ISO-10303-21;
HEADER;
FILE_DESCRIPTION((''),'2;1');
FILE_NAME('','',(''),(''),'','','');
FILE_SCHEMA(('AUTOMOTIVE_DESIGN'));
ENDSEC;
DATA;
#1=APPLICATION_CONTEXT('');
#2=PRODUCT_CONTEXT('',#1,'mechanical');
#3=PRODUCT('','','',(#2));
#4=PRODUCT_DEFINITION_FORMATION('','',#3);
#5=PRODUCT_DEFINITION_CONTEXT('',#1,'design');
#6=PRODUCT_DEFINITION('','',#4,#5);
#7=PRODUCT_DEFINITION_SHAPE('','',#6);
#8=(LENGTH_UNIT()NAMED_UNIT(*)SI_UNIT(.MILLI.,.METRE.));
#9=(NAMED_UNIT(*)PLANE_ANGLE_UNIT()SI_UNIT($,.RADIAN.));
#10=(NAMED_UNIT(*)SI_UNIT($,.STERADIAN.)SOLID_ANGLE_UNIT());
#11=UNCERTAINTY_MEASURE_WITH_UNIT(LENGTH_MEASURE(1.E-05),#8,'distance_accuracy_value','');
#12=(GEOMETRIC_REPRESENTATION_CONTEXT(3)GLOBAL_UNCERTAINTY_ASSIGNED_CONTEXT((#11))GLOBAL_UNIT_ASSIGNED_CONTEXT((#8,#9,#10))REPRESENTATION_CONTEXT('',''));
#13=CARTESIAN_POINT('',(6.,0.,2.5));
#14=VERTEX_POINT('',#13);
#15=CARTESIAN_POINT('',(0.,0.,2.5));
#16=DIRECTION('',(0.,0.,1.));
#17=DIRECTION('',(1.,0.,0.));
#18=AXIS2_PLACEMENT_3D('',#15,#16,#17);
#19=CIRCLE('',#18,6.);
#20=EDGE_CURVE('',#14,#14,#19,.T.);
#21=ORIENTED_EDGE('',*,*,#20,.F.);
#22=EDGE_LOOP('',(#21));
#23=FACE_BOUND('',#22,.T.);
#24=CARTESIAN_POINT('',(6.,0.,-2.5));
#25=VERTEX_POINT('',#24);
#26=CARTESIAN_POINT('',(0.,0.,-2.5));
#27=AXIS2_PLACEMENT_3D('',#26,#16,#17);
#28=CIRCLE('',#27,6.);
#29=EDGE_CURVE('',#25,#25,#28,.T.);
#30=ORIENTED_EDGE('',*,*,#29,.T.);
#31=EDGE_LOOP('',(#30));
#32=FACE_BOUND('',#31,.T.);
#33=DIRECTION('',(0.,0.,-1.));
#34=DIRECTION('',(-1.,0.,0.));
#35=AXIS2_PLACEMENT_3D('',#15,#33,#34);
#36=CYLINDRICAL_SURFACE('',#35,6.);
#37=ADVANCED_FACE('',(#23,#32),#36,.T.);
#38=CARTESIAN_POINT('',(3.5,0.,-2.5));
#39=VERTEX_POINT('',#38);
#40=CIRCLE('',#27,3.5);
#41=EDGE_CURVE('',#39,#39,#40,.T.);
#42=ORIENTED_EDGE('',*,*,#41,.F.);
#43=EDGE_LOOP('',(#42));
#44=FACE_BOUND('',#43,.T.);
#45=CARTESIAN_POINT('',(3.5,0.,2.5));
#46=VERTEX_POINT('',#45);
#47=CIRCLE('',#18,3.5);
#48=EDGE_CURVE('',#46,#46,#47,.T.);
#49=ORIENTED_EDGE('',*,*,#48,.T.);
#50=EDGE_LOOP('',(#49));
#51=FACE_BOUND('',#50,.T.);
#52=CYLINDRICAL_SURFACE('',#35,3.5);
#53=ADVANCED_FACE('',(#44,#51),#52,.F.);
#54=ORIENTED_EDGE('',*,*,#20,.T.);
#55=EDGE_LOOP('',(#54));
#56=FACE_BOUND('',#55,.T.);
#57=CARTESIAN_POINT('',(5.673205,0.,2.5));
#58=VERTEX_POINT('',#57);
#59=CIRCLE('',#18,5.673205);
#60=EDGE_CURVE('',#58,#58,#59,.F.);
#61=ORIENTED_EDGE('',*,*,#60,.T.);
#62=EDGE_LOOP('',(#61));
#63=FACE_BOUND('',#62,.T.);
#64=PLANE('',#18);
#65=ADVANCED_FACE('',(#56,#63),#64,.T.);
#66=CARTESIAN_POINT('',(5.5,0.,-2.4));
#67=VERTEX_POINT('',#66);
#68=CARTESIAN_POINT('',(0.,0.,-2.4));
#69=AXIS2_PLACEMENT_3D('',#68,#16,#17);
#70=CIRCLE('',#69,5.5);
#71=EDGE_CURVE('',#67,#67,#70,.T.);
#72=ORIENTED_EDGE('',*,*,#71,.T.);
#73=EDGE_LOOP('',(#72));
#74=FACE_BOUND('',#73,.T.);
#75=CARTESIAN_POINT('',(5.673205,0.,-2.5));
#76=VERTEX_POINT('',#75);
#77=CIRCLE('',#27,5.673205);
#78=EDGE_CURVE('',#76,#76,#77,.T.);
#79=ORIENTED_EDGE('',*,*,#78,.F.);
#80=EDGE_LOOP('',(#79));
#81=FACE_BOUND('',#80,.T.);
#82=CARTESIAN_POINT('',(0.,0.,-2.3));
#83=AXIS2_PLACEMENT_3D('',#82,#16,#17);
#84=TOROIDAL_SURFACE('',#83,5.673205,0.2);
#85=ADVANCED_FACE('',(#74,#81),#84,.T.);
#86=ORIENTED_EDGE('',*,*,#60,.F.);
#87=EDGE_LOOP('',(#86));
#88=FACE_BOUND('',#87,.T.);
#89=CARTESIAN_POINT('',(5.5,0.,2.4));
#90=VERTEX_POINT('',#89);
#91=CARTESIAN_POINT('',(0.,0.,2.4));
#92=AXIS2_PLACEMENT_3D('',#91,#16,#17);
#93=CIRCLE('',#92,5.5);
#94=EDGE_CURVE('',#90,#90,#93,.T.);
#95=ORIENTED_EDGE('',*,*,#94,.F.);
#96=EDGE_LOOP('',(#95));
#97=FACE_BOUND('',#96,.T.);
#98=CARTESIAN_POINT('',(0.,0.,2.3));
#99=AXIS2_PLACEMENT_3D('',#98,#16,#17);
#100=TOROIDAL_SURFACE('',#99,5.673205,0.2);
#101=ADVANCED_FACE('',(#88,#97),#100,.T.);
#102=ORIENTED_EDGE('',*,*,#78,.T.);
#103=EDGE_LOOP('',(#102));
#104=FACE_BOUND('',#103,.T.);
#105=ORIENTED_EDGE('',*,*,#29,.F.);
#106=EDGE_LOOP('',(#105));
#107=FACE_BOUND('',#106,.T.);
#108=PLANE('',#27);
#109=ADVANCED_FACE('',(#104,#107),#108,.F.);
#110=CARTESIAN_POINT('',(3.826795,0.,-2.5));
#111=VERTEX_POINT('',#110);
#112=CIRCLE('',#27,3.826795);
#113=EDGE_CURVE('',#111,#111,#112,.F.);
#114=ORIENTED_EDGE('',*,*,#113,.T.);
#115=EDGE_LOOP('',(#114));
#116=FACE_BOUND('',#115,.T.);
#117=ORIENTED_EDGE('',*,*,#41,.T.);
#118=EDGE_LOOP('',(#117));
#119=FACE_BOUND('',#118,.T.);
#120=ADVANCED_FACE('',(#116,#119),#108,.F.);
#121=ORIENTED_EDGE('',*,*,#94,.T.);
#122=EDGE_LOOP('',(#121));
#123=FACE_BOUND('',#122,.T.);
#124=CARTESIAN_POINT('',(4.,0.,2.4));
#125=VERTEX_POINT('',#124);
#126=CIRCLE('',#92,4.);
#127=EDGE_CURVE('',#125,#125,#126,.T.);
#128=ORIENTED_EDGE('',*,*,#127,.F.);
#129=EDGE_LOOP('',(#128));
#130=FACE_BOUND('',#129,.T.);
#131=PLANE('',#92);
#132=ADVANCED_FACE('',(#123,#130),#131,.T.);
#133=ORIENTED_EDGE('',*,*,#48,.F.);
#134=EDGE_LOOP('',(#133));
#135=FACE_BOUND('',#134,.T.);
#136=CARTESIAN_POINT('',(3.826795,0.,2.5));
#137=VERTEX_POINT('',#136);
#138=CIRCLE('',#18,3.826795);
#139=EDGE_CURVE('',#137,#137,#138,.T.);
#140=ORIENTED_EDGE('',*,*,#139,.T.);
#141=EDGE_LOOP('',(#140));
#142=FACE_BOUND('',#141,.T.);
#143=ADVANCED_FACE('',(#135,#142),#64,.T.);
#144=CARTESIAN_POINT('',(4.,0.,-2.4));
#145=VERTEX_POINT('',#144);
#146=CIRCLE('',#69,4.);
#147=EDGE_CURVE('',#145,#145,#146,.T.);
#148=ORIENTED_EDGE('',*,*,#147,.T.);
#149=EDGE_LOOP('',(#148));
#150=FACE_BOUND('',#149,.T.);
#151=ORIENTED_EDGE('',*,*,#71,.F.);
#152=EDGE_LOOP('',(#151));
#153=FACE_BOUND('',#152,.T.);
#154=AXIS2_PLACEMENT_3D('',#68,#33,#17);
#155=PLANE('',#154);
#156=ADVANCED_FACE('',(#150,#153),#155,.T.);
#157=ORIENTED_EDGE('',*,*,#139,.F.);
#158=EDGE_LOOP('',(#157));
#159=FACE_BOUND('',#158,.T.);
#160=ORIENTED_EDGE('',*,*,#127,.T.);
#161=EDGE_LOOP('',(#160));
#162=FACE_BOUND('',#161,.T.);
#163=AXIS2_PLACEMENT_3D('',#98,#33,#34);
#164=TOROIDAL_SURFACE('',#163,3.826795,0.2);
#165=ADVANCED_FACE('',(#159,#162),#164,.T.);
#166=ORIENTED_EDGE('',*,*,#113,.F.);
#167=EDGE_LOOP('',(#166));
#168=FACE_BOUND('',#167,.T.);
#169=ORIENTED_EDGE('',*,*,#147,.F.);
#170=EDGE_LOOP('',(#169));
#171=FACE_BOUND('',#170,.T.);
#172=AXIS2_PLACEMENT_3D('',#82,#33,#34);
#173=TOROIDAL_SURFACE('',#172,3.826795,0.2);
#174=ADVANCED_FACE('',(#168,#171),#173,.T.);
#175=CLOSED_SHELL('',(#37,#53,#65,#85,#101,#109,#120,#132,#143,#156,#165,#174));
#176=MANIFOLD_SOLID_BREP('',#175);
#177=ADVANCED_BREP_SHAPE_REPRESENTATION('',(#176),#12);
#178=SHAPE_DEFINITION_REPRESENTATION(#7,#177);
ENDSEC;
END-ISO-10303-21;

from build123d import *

# Parameters (mm, degrees)
SKETCH_1_R          = 6
SKETCH_1_R_2        = 3.5
EXTRUDE_1_DEPTH     = 2.5
SKETCH_2_R          = 5.5
SKETCH_2_R_2        = 4
CUT_EXTRUDE_1_DEPTH = 0.1
FILLET_1_R          = 0.2


with BuildPart() as part:
    # 草图1 → 凸台-拉伸1 (new, symmetric)
    with BuildSketch(Plane.XY):
        Circle(SKETCH_1_R)
        Circle(SKETCH_1_R_2, mode=Mode.SUBTRACT)
    extrude(amount=EXTRUDE_1_DEPTH, both=True)

    # 草图2 → 切除-拉伸1 (cut)
    with BuildSketch(Plane.XY.offset(2.5)):
        Circle(SKETCH_2_R)
        Circle(SKETCH_2_R_2, mode=Mode.SUBTRACT)
    cut_extrude_1 = extrude(amount=-CUT_EXTRUDE_1_DEPTH, mode=Mode.SUBTRACT)

    # 镜向1: 切除-拉伸1 across plane
    add(cut_extrude_1.mirror(Plane.XY), mode=Mode.SUBTRACT)

    # 圆角1
    # the kernel refuses this fillet: 0.2 mm, written as the material it takes off along each edge
    with BuildSketch(Plane(origin=(0, 0, 2.5), x_dir=(1, 0, 0), z_dir=(0, -1, 0))) as fillet_1_piece_1:
        with BuildLine():
            CenterArc((5.673205081, -0.2), FILLET_1_R, 90, 60)
            Line((5.5, -0.1), (5.496535898, -0.098))
            ThreePointArc((5.496535898, -0.098), (5.496, -0.05), (5.496, 0))
            Line((5.496, 0), (5.5, 0.004))
            Line((5.5, 0.004), (5.673205081, 0.004))
            Line((5.673205081, 0.004), (5.673205081, 0))
        make_face()
    revolve(axis=Axis((0, 0, 2.5), (0, 0, 1)), mode=Mode.SUBTRACT)
    with BuildSketch(Plane(origin=(0, 0, 2.5), x_dir=(1, 0, 0), z_dir=(0, -1, 0))) as fillet_1_piece_2:
        with BuildLine():
            CenterArc((3.826794919, -0.2), FILLET_1_R, 30, 60)
            Line((3.826794919, 0), (3.826794919, 0.004))
            Line((3.826794919, 0.004), (4, 0.004))
            Line((4, 0.004), (4.004, 0))
            ThreePointArc((4.004, 0), (4.004, -0.05), (4.003464102, -0.098))
            Line((4.003464102, -0.098), (4, -0.1))
        make_face()
    revolve(axis=Axis((0, 0, 2.5), (0, 0, 1)), mode=Mode.SUBTRACT)
    with BuildSketch(Plane(origin=(0, 0, -2.5), x_dir=(1, 0, 0), z_dir=(0, -1, 0))) as fillet_1_piece_3:
        with BuildLine():
            CenterArc((3.826794919, 0.2), FILLET_1_R, 270, 60)
            Line((3.826794919, 0), (3.826794919, -0.004))
            Line((3.826794919, -0.004), (4, -0.004))
            Line((4, -0.004), (4.004, 0))
            ThreePointArc((4.004, 0), (4.004, 0.05), (4.003464102, 0.098))
            Line((4.003464102, 0.098), (4, 0.1))
        make_face()
    revolve(axis=Axis((0, 0, -2.5), (0, 0, 1)), mode=Mode.SUBTRACT)
    with BuildSketch(Plane(origin=(0, 0, -2.5), x_dir=(1, 0, 0), z_dir=(0, -1, 0))) as fillet_1_piece_4:
        with BuildLine():
            CenterArc((5.673205081, 0.2), FILLET_1_R, 210, 60)
            Line((5.5, 0.1), (5.496535898, 0.098))
            ThreePointArc((5.496535898, 0.098), (5.496, 0.05), (5.496, 0))
            Line((5.496, 0), (5.5, -0.004))
            Line((5.5, -0.004), (5.673205081, -0.004))
            Line((5.673205081, -0.004), (5.673205081, 0))
        make_face()
    revolve(axis=Axis((0, 0, -2.5), (0, 0, 1)), mode=Mode.SUBTRACT)


solid = part.part
